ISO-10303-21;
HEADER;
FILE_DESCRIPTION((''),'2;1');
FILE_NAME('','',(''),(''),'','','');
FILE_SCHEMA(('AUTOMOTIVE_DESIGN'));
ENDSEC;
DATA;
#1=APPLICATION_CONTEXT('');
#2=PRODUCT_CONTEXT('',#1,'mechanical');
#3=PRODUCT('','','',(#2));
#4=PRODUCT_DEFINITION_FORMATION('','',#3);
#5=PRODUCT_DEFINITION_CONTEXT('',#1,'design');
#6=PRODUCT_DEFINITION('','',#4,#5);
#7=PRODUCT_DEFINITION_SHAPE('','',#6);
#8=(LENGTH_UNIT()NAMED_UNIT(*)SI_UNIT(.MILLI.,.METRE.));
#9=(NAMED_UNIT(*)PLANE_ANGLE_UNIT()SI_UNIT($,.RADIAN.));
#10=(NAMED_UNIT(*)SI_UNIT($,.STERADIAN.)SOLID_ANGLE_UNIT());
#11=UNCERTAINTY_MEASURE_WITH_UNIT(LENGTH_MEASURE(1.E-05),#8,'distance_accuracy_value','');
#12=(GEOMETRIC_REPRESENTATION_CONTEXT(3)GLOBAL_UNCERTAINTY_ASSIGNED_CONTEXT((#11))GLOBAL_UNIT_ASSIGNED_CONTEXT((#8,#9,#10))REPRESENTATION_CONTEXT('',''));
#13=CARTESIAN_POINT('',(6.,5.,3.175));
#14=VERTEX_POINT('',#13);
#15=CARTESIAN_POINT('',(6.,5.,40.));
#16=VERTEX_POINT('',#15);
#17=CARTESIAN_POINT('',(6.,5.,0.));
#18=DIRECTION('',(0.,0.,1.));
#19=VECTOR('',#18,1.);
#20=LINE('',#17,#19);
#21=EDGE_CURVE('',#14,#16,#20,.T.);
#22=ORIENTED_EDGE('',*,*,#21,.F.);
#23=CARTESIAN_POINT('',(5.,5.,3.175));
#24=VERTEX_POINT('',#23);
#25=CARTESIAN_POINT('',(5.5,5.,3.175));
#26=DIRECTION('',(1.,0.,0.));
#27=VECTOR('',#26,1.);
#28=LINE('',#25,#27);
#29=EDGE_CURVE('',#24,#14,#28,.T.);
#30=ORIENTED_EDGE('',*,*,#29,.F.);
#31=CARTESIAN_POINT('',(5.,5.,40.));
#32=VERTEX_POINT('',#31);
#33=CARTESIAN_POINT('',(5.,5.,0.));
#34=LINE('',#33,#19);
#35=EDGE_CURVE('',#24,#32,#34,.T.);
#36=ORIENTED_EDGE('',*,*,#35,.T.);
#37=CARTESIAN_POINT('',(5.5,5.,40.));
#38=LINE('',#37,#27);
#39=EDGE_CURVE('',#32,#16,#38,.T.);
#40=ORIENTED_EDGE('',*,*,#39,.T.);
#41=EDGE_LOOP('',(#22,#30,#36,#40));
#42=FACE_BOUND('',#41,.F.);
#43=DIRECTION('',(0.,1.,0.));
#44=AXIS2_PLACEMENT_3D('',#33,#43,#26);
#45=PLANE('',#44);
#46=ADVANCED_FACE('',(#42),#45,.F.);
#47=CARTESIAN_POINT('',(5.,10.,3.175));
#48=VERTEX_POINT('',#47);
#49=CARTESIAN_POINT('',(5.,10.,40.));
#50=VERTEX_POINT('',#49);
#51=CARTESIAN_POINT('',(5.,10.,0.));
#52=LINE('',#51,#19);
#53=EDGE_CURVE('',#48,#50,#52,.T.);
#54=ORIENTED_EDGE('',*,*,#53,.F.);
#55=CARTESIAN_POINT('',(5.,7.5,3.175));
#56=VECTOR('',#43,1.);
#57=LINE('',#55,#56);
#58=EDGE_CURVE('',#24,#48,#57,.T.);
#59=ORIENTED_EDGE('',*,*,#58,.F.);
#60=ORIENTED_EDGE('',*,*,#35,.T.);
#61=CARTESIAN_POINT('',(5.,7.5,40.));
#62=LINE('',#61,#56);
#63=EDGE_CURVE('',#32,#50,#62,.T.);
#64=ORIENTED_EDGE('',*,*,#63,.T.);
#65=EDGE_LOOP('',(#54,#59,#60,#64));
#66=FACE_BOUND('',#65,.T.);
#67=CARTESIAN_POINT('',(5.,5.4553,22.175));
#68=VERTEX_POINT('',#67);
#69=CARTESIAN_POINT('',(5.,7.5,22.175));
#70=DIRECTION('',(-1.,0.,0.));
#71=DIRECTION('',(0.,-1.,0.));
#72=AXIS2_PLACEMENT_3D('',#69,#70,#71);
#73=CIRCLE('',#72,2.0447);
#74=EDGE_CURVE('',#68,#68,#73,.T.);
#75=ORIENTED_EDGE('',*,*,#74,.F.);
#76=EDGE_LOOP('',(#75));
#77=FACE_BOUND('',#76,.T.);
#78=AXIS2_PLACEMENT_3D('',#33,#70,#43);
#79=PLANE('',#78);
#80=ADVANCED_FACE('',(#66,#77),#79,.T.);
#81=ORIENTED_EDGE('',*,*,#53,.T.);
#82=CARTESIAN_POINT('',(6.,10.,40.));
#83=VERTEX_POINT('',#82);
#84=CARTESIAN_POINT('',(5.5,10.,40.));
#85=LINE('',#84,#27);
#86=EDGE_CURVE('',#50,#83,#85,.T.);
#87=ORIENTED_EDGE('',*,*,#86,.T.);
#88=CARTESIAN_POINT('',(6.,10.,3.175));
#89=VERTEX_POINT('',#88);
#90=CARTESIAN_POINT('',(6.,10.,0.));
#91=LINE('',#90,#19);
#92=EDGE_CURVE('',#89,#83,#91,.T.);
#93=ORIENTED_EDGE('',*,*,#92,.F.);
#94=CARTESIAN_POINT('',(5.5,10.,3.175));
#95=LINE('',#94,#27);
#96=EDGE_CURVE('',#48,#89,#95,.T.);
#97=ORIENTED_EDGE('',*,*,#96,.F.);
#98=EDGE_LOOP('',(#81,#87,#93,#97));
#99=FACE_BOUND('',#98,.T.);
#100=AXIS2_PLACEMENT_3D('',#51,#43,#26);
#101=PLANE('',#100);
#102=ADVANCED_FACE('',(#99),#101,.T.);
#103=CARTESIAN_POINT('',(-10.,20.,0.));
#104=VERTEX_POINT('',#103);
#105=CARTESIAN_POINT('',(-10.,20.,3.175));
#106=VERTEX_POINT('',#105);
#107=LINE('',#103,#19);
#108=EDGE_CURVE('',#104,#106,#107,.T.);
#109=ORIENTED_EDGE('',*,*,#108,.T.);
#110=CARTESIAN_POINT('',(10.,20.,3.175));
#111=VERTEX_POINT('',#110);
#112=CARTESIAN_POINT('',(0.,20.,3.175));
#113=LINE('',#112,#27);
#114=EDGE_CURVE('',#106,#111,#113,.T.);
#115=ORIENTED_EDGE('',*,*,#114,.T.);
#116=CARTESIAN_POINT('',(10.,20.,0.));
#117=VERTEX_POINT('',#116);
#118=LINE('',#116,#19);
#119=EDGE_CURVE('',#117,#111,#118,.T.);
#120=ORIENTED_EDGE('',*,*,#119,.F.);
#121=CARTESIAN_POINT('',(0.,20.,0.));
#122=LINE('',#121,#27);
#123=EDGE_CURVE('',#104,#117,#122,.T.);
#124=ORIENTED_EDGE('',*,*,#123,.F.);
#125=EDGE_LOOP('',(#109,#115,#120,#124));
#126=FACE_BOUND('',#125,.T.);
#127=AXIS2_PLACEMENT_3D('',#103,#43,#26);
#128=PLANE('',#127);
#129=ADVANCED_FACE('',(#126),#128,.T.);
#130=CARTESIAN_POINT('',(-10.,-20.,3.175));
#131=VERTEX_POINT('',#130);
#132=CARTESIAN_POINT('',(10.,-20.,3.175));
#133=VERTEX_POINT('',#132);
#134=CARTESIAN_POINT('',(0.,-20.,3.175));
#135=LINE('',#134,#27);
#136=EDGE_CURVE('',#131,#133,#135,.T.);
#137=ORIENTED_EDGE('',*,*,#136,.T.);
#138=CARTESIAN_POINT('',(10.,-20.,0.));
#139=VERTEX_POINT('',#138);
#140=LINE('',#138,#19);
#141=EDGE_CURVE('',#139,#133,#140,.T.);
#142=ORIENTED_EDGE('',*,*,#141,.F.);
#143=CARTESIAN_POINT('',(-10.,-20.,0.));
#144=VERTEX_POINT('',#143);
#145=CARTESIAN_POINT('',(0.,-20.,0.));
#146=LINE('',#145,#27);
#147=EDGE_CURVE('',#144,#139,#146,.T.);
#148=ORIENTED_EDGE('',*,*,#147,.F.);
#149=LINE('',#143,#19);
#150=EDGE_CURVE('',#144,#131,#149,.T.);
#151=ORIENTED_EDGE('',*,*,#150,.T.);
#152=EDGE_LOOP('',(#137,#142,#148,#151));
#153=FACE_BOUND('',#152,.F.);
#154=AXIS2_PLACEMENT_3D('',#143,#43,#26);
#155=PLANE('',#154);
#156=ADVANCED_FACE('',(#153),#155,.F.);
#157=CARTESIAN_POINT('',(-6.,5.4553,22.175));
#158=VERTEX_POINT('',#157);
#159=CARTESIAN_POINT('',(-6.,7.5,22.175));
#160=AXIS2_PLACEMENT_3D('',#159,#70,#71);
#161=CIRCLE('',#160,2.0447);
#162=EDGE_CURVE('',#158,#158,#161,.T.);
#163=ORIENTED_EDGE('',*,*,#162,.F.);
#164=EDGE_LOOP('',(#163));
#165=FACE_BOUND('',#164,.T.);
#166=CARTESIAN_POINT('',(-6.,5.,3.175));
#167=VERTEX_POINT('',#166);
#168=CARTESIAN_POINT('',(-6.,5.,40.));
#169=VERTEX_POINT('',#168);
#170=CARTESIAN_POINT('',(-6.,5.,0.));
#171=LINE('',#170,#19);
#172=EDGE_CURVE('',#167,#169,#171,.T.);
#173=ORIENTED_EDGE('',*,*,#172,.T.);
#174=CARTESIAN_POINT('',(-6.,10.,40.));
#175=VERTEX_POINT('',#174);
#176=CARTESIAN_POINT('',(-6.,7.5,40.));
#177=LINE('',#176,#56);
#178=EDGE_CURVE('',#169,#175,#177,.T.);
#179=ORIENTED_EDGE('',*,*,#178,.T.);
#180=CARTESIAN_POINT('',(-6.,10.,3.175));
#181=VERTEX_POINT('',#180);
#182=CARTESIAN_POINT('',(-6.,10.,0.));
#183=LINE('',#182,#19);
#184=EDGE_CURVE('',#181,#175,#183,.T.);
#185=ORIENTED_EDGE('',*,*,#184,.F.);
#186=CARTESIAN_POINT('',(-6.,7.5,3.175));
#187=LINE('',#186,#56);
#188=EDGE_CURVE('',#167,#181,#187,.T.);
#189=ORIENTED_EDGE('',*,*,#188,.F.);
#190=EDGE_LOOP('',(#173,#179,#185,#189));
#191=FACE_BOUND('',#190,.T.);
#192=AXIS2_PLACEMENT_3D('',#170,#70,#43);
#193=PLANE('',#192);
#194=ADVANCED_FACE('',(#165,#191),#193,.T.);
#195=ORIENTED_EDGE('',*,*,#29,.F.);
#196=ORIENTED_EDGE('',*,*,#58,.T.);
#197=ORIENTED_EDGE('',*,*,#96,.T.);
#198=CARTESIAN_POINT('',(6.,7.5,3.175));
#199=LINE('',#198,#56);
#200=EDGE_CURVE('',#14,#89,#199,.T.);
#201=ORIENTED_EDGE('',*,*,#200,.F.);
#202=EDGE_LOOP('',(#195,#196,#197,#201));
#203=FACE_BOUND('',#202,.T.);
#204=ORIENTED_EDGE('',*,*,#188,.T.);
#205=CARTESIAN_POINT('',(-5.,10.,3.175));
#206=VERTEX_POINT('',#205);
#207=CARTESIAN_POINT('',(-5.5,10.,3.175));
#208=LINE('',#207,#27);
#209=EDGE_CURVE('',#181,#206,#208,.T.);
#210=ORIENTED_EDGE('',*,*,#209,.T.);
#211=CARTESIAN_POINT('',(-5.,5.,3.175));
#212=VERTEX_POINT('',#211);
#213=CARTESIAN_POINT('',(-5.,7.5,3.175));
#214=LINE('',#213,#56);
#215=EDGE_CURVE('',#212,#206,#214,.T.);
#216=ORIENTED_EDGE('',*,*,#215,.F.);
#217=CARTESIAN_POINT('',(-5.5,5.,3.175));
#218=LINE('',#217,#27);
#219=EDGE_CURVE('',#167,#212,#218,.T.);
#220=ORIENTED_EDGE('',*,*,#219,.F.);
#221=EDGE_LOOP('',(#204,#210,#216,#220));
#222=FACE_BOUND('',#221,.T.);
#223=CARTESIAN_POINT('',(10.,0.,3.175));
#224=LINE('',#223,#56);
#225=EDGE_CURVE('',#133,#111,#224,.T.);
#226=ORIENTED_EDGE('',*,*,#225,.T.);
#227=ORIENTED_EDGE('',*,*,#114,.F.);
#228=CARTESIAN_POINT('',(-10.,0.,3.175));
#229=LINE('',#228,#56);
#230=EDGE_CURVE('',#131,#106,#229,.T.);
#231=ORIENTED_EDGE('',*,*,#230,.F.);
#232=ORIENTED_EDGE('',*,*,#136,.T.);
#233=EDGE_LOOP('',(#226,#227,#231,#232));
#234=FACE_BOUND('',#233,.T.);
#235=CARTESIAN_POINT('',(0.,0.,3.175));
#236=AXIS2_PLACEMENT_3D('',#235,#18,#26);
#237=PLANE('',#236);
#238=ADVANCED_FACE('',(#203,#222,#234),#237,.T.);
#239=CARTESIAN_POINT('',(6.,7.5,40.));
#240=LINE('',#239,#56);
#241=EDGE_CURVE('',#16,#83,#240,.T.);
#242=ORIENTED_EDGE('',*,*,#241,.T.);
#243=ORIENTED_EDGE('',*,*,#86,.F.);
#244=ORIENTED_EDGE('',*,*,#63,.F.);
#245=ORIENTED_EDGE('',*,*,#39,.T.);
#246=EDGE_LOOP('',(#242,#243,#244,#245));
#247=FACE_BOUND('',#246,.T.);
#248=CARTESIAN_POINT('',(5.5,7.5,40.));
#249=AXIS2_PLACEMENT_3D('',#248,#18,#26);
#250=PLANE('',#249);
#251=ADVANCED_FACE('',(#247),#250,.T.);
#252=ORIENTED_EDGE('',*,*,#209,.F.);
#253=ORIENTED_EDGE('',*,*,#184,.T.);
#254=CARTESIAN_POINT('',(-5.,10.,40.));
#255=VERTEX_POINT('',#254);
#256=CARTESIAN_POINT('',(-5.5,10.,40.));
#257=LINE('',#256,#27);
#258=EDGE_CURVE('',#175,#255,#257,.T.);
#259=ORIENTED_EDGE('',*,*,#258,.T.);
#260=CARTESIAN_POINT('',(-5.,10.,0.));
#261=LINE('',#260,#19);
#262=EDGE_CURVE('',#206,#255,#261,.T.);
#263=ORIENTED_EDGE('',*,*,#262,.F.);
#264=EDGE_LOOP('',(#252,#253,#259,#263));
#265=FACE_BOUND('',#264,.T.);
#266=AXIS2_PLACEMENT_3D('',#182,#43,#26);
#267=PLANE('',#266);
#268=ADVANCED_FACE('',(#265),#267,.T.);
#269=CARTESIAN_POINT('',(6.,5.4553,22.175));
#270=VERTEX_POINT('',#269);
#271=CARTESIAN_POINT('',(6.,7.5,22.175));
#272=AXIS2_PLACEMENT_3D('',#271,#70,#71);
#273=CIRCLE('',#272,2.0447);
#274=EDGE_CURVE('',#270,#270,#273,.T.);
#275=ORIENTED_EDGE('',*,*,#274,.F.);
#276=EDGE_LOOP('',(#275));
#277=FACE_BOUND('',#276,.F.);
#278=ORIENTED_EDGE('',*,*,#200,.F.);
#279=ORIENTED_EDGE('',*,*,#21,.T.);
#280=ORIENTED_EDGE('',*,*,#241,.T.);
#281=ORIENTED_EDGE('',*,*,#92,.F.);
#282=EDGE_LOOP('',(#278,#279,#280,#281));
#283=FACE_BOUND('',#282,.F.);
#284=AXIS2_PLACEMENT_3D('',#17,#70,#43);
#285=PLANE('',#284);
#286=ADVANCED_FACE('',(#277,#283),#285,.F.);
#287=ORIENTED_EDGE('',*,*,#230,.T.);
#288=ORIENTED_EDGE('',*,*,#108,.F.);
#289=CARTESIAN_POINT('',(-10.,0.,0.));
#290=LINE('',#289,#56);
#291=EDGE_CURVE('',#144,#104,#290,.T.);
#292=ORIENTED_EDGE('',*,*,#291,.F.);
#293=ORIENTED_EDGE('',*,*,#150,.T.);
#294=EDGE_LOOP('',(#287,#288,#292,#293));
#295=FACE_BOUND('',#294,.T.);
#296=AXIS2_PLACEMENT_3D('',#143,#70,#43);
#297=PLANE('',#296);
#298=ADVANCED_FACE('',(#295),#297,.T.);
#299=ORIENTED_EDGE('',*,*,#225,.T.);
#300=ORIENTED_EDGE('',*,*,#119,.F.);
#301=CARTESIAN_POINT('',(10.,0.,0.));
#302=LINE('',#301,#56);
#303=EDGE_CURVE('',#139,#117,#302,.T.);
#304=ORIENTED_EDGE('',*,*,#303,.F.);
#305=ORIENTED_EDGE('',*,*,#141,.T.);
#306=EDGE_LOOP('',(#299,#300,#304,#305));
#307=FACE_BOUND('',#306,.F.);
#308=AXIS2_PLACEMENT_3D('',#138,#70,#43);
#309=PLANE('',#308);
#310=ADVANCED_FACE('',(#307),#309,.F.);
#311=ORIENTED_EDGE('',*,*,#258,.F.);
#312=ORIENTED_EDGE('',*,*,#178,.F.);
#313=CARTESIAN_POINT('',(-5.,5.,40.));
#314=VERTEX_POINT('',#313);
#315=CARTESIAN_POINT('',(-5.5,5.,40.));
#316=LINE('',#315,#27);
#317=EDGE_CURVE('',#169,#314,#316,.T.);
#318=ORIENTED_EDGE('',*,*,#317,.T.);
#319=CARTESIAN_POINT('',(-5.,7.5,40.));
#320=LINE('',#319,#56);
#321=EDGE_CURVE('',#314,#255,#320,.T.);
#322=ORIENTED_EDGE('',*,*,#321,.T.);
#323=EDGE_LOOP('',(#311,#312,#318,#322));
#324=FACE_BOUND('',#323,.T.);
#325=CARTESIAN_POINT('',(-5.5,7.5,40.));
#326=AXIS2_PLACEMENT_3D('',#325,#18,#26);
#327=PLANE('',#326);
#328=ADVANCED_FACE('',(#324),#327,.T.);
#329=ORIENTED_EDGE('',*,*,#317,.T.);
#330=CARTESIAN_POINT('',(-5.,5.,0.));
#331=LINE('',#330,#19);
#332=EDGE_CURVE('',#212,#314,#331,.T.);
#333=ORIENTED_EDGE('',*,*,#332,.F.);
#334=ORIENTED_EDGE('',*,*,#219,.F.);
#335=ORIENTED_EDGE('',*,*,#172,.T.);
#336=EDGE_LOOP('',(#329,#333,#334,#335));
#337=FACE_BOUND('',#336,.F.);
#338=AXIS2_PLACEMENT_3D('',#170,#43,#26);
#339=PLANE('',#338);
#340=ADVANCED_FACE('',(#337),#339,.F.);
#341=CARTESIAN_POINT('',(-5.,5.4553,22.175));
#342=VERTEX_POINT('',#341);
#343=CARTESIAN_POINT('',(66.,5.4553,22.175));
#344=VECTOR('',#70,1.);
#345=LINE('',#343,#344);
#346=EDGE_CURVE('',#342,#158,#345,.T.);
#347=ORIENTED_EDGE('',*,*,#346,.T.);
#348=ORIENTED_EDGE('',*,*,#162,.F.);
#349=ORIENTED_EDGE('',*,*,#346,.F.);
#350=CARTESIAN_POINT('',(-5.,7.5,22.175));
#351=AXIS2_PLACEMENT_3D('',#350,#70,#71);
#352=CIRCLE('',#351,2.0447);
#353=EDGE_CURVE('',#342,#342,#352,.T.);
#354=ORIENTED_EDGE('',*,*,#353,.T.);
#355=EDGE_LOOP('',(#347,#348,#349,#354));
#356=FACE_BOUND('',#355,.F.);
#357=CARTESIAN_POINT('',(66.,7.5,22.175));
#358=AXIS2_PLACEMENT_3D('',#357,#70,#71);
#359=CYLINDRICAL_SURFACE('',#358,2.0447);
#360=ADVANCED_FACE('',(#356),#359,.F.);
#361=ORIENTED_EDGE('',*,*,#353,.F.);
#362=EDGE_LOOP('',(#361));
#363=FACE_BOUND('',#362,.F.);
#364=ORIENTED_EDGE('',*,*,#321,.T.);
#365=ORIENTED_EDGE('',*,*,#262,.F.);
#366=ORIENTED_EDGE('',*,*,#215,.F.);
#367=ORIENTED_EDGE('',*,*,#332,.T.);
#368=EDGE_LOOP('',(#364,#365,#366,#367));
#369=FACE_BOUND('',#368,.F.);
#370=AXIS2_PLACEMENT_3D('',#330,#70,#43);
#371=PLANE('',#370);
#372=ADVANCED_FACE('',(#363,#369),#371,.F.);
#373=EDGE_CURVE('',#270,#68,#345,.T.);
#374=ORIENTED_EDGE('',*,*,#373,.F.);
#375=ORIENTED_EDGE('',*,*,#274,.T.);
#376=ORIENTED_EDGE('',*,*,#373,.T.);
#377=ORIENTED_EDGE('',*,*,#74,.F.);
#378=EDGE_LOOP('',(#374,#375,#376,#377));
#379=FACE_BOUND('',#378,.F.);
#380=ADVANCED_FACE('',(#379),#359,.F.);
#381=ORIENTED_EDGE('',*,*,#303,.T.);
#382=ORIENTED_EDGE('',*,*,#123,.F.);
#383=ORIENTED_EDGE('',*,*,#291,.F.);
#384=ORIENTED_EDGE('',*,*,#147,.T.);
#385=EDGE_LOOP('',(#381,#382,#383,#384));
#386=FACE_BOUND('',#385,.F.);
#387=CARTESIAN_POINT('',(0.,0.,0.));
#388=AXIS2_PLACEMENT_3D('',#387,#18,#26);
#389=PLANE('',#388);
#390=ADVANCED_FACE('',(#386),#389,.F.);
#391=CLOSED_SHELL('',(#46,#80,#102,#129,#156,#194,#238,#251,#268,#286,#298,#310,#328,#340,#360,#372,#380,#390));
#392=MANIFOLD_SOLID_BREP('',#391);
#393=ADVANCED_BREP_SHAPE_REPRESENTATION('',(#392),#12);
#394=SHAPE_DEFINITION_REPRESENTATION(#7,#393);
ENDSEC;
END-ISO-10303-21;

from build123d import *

# Parameters (mm, degrees)
F0_W     = 20
F0_H     = 40
F0_W_2   = 1
F0_H_2   = 5
F1_DEPTH = 3.175
F2_DEPTH = 40
F4_D     = 4.0894


# Not quite as in the source:
# - a length typed as a fraction of an inch, garbled in the dataset ("3 / 203.2 mm" for 3/8 in), is restored


with BuildPart() as f1:
    # F0 (on Top) → F1 (new body)
    with BuildSketch(Plane.XY):
        Rectangle(F0_W, F0_H)
        with Locations((-5.5, 7.5)):
            Rectangle(F0_W_2, F0_H_2, mode=Mode.SUBTRACT)
        with Locations((5.5, 7.5)):
            Rectangle(F0_W_2, F0_H_2, mode=Mode.SUBTRACT)
    extrude(amount=F1_DEPTH)

    # F0 (on Top) → F2 (join)
    with BuildSketch(Plane.XY):
        with Locations((-5.5, 7.5)):
            Rectangle(F0_W_2, F0_H_2)
        with Locations((5.5, 7.5)):
            Rectangle(F0_W_2, F0_H_2)
    extrude(amount=F2_DEPTH)

    # F4 (through all)
    with Locations(Plane.YZ.offset(6)):
        with Locations((7.5, 22.175)):
            Hole(F4_D / 2)


solid = f1.part
